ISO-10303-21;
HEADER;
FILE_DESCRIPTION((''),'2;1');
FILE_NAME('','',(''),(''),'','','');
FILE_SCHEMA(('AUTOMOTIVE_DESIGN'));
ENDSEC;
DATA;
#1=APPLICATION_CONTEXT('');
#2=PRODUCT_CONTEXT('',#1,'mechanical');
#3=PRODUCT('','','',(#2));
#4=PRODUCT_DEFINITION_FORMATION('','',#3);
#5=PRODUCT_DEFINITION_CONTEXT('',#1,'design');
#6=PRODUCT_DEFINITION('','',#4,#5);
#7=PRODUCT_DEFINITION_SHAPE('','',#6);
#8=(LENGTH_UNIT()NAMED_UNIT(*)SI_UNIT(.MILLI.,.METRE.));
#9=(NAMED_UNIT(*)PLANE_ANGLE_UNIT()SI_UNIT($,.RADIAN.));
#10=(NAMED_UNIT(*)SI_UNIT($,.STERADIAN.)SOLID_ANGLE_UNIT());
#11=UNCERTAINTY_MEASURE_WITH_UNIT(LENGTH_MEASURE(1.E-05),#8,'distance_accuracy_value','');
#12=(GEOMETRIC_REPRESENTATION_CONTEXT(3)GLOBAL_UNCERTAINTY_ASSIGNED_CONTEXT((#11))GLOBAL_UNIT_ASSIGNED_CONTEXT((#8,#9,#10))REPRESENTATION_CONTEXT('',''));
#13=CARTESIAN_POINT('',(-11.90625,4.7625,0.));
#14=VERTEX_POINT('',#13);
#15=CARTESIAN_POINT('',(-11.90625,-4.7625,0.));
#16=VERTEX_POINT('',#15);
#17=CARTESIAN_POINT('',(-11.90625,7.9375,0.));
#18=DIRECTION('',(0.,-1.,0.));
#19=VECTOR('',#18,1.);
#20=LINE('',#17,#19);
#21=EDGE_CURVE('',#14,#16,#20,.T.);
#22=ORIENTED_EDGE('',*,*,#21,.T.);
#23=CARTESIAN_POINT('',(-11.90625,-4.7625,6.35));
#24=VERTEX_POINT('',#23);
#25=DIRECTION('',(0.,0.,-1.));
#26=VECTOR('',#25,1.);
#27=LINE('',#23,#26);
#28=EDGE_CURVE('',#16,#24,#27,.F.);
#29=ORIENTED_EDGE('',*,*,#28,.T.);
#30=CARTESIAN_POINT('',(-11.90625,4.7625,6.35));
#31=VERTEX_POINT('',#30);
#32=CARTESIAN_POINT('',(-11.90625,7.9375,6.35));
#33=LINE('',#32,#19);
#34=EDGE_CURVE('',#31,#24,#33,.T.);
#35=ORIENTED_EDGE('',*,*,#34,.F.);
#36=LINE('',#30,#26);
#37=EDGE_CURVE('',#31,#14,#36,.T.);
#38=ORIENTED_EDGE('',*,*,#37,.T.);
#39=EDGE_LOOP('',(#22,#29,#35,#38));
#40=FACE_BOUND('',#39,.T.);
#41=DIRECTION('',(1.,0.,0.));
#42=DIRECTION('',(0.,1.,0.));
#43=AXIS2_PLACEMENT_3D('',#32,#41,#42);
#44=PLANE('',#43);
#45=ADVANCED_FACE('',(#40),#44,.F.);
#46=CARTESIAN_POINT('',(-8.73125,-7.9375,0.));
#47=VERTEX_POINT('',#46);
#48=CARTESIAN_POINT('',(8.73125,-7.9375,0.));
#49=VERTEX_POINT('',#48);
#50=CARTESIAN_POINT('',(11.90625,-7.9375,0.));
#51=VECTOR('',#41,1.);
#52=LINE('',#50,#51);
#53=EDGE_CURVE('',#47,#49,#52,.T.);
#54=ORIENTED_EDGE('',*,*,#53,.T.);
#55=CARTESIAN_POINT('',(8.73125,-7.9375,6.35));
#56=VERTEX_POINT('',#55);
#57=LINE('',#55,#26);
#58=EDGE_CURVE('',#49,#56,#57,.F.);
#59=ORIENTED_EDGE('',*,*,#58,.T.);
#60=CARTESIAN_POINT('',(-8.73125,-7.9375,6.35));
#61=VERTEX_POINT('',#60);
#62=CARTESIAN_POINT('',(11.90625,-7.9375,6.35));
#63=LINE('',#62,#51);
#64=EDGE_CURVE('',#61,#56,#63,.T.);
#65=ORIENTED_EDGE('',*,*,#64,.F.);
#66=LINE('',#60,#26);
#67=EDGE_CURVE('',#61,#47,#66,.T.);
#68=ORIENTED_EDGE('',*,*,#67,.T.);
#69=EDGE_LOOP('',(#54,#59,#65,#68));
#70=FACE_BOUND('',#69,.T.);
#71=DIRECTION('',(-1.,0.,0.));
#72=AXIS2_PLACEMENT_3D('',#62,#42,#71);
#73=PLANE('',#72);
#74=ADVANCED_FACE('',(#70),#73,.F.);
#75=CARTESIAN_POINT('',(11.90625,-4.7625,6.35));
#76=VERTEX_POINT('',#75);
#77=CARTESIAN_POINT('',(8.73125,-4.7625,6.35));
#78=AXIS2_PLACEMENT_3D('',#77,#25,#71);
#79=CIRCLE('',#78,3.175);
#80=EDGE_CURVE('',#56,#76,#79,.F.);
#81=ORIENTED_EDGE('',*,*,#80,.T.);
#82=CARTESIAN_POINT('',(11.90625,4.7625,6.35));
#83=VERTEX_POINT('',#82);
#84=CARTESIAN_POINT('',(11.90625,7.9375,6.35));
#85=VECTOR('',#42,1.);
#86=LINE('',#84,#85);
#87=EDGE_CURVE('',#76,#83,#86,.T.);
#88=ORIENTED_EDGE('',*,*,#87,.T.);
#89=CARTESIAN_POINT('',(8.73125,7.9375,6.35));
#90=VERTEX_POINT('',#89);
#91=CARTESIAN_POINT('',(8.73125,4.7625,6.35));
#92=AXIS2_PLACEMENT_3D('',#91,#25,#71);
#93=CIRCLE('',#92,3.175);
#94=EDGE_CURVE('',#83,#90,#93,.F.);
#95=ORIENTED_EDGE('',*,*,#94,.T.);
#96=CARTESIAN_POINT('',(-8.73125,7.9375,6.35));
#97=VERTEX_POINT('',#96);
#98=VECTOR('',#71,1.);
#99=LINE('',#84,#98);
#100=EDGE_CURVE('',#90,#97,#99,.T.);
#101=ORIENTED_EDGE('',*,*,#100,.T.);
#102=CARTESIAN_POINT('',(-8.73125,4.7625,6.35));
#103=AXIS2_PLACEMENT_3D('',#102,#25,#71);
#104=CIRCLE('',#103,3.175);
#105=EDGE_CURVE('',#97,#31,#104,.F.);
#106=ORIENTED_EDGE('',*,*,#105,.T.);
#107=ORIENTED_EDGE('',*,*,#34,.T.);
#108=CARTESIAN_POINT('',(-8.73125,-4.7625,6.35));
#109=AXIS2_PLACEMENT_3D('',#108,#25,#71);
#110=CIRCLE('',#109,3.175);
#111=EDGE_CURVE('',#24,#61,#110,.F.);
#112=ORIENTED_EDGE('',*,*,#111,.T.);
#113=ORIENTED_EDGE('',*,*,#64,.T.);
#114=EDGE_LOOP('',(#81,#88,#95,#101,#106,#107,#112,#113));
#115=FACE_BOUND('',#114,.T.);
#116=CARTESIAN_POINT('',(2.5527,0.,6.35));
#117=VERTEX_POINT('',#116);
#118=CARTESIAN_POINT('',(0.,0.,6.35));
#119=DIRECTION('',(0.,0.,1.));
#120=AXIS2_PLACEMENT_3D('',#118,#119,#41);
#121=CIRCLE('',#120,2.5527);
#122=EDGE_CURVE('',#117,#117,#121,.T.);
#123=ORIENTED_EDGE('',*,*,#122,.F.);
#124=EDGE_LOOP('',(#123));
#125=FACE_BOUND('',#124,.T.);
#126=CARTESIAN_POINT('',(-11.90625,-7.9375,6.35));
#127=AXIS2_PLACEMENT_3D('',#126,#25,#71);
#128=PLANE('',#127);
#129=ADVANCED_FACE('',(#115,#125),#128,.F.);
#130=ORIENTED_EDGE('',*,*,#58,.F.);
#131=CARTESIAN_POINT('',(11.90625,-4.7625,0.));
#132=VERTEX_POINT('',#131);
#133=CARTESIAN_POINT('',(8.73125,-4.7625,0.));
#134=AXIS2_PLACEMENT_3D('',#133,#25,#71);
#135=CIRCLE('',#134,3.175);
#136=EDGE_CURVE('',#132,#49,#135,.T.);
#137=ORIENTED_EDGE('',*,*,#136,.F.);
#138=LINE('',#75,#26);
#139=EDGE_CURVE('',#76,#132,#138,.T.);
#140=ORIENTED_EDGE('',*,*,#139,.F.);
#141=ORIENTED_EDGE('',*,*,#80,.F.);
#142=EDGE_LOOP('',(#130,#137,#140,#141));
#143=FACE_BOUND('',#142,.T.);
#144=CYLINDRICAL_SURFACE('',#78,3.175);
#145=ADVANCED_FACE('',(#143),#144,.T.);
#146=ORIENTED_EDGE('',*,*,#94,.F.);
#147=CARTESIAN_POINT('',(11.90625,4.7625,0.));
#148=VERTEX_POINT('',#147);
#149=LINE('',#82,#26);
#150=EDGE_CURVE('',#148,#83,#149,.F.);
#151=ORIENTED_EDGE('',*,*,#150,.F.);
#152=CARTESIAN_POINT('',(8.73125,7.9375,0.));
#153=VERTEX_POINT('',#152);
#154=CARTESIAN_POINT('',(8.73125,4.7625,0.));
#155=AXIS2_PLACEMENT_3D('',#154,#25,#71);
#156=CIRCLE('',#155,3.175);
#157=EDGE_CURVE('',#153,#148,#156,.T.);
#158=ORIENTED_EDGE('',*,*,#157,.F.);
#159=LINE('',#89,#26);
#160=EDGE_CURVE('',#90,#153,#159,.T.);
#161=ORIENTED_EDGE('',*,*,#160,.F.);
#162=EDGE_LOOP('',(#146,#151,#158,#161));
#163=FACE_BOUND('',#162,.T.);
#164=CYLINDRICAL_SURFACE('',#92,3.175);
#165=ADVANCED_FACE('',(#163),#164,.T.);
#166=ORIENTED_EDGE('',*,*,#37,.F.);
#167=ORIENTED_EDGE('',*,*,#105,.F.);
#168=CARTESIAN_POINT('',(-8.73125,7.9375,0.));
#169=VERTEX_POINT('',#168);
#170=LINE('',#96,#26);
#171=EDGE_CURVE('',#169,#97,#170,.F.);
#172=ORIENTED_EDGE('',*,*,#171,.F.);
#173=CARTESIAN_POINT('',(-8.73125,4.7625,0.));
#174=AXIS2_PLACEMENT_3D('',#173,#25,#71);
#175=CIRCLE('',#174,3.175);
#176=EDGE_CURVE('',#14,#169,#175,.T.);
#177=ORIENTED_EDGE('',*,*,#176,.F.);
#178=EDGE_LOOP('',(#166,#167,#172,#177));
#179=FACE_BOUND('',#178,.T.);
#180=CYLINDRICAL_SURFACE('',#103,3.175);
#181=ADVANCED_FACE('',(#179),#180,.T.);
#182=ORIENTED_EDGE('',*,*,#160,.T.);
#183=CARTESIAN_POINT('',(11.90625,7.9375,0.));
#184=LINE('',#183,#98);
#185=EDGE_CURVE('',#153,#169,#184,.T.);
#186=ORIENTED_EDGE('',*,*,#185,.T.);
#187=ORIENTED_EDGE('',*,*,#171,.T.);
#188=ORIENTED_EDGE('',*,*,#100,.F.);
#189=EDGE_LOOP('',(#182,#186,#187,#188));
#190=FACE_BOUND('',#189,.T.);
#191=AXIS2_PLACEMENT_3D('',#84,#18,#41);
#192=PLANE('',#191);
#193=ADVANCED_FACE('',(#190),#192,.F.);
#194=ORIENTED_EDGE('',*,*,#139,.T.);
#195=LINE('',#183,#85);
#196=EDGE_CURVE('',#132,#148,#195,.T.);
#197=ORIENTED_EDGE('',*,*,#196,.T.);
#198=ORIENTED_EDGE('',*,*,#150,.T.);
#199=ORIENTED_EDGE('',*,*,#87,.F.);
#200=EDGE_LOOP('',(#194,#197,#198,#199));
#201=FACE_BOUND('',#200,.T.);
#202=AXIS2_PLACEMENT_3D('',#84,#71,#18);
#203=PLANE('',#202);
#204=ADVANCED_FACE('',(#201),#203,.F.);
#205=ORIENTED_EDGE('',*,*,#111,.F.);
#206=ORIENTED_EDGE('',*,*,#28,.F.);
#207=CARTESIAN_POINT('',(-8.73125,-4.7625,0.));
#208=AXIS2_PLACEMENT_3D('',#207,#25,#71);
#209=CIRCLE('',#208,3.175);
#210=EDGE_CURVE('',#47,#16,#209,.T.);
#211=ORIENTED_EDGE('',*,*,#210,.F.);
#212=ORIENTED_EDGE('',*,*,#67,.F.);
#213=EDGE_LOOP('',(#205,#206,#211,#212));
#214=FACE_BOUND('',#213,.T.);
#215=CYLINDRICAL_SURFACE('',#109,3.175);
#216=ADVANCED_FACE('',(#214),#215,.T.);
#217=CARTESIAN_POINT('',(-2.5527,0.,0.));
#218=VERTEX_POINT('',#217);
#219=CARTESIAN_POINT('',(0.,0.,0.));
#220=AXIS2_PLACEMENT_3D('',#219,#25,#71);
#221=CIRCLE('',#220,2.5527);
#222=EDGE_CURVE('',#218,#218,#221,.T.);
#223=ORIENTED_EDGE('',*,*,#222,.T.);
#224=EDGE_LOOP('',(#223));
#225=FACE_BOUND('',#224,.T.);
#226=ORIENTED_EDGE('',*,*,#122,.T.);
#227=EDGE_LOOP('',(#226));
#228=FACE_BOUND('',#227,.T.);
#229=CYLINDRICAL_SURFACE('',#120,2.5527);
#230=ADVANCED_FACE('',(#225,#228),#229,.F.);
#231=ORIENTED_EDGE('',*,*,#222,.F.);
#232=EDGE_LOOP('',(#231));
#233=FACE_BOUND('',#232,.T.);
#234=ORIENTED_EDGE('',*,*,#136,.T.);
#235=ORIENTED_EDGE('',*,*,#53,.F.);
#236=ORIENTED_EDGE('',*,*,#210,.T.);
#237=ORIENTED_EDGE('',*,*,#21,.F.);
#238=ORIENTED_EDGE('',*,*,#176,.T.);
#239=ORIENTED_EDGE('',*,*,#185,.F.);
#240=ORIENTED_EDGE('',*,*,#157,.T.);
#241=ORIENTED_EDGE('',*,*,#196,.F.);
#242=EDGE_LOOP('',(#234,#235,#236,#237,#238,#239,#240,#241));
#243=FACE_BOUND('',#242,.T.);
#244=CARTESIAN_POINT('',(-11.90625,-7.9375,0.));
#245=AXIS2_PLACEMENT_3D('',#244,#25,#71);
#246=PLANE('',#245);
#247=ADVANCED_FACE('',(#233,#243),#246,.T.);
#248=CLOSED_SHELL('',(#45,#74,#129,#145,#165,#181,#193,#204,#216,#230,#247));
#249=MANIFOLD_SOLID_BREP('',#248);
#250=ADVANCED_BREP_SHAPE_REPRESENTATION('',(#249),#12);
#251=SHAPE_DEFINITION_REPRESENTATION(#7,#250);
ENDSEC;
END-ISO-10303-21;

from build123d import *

# Parameters (mm, degrees)
SKETCH1_W               = 23.8125
SKETCH1_H               = 15.875
BASE_FLANGE1_DEPTH      = 6.35
F_1_4_20_TAPPED_HOLE1_D = 5.1054
BREAK_CORNER1_DEPTH     = 6.35


# Read off the part's stored shape, not the designer's step: Break-Corner1
# Sheet-metal steps are written as plain solids
with BuildPart() as part:
    # Sketch1 → Base-Flange1 (new body)
    with BuildSketch(Plane.XY):
        Rectangle(SKETCH1_W, SKETCH1_H)
    extrude(amount=BASE_FLANGE1_DEPTH)

    # 1/4-20 Tapped Hole1 (through all)
    with Locations(Plane.XY.offset(6.35)):
        with Locations((0, 0)):
            Hole(F_1_4_20_TAPPED_HOLE1_D / 2)

    # Break-Corner1 outline → Break-Corner1 (cut)
    with BuildSketch(Plane.XY):
        with BuildLine():
            Line((-11.90625, -7.9375), (-8.73125, -7.9375))
            ThreePointArc((-8.73125, -7.9375), (-10.97631403, -7.00756403), (-11.90625, -4.7625))
            Line((-11.90625, -4.7625), (-11.90625, -7.9375))
        make_face()
        with BuildLine():
            ThreePointArc((11.90625, -4.7625), (10.97631403, -7.00756403), (8.73125, -7.9375))
            Line((8.73125, -7.9375), (11.90625, -7.9375))
            Line((11.90625, -7.9375), (11.90625, -4.7625))
        make_face()
        with BuildLine():
            Line((-11.90625, 7.9375), (-11.90625, 4.7625))
            ThreePointArc((-11.90625, 4.7625), (-10.97631403, 7.00756403), (-8.73125, 7.9375))
            Line((-8.73125, 7.9375), (-11.90625, 7.9375))
        make_face()
        with BuildLine():
            ThreePointArc((8.73125, 7.9375), (10.97631403, 7.00756403), (11.90625, 4.7625))
            Line((11.90625, 4.7625), (11.90625, 7.9375))
            Line((11.90625, 7.9375), (8.73125, 7.9375))
        make_face()
    extrude(amount=BREAK_CORNER1_DEPTH, mode=Mode.SUBTRACT)


solid = part.part
